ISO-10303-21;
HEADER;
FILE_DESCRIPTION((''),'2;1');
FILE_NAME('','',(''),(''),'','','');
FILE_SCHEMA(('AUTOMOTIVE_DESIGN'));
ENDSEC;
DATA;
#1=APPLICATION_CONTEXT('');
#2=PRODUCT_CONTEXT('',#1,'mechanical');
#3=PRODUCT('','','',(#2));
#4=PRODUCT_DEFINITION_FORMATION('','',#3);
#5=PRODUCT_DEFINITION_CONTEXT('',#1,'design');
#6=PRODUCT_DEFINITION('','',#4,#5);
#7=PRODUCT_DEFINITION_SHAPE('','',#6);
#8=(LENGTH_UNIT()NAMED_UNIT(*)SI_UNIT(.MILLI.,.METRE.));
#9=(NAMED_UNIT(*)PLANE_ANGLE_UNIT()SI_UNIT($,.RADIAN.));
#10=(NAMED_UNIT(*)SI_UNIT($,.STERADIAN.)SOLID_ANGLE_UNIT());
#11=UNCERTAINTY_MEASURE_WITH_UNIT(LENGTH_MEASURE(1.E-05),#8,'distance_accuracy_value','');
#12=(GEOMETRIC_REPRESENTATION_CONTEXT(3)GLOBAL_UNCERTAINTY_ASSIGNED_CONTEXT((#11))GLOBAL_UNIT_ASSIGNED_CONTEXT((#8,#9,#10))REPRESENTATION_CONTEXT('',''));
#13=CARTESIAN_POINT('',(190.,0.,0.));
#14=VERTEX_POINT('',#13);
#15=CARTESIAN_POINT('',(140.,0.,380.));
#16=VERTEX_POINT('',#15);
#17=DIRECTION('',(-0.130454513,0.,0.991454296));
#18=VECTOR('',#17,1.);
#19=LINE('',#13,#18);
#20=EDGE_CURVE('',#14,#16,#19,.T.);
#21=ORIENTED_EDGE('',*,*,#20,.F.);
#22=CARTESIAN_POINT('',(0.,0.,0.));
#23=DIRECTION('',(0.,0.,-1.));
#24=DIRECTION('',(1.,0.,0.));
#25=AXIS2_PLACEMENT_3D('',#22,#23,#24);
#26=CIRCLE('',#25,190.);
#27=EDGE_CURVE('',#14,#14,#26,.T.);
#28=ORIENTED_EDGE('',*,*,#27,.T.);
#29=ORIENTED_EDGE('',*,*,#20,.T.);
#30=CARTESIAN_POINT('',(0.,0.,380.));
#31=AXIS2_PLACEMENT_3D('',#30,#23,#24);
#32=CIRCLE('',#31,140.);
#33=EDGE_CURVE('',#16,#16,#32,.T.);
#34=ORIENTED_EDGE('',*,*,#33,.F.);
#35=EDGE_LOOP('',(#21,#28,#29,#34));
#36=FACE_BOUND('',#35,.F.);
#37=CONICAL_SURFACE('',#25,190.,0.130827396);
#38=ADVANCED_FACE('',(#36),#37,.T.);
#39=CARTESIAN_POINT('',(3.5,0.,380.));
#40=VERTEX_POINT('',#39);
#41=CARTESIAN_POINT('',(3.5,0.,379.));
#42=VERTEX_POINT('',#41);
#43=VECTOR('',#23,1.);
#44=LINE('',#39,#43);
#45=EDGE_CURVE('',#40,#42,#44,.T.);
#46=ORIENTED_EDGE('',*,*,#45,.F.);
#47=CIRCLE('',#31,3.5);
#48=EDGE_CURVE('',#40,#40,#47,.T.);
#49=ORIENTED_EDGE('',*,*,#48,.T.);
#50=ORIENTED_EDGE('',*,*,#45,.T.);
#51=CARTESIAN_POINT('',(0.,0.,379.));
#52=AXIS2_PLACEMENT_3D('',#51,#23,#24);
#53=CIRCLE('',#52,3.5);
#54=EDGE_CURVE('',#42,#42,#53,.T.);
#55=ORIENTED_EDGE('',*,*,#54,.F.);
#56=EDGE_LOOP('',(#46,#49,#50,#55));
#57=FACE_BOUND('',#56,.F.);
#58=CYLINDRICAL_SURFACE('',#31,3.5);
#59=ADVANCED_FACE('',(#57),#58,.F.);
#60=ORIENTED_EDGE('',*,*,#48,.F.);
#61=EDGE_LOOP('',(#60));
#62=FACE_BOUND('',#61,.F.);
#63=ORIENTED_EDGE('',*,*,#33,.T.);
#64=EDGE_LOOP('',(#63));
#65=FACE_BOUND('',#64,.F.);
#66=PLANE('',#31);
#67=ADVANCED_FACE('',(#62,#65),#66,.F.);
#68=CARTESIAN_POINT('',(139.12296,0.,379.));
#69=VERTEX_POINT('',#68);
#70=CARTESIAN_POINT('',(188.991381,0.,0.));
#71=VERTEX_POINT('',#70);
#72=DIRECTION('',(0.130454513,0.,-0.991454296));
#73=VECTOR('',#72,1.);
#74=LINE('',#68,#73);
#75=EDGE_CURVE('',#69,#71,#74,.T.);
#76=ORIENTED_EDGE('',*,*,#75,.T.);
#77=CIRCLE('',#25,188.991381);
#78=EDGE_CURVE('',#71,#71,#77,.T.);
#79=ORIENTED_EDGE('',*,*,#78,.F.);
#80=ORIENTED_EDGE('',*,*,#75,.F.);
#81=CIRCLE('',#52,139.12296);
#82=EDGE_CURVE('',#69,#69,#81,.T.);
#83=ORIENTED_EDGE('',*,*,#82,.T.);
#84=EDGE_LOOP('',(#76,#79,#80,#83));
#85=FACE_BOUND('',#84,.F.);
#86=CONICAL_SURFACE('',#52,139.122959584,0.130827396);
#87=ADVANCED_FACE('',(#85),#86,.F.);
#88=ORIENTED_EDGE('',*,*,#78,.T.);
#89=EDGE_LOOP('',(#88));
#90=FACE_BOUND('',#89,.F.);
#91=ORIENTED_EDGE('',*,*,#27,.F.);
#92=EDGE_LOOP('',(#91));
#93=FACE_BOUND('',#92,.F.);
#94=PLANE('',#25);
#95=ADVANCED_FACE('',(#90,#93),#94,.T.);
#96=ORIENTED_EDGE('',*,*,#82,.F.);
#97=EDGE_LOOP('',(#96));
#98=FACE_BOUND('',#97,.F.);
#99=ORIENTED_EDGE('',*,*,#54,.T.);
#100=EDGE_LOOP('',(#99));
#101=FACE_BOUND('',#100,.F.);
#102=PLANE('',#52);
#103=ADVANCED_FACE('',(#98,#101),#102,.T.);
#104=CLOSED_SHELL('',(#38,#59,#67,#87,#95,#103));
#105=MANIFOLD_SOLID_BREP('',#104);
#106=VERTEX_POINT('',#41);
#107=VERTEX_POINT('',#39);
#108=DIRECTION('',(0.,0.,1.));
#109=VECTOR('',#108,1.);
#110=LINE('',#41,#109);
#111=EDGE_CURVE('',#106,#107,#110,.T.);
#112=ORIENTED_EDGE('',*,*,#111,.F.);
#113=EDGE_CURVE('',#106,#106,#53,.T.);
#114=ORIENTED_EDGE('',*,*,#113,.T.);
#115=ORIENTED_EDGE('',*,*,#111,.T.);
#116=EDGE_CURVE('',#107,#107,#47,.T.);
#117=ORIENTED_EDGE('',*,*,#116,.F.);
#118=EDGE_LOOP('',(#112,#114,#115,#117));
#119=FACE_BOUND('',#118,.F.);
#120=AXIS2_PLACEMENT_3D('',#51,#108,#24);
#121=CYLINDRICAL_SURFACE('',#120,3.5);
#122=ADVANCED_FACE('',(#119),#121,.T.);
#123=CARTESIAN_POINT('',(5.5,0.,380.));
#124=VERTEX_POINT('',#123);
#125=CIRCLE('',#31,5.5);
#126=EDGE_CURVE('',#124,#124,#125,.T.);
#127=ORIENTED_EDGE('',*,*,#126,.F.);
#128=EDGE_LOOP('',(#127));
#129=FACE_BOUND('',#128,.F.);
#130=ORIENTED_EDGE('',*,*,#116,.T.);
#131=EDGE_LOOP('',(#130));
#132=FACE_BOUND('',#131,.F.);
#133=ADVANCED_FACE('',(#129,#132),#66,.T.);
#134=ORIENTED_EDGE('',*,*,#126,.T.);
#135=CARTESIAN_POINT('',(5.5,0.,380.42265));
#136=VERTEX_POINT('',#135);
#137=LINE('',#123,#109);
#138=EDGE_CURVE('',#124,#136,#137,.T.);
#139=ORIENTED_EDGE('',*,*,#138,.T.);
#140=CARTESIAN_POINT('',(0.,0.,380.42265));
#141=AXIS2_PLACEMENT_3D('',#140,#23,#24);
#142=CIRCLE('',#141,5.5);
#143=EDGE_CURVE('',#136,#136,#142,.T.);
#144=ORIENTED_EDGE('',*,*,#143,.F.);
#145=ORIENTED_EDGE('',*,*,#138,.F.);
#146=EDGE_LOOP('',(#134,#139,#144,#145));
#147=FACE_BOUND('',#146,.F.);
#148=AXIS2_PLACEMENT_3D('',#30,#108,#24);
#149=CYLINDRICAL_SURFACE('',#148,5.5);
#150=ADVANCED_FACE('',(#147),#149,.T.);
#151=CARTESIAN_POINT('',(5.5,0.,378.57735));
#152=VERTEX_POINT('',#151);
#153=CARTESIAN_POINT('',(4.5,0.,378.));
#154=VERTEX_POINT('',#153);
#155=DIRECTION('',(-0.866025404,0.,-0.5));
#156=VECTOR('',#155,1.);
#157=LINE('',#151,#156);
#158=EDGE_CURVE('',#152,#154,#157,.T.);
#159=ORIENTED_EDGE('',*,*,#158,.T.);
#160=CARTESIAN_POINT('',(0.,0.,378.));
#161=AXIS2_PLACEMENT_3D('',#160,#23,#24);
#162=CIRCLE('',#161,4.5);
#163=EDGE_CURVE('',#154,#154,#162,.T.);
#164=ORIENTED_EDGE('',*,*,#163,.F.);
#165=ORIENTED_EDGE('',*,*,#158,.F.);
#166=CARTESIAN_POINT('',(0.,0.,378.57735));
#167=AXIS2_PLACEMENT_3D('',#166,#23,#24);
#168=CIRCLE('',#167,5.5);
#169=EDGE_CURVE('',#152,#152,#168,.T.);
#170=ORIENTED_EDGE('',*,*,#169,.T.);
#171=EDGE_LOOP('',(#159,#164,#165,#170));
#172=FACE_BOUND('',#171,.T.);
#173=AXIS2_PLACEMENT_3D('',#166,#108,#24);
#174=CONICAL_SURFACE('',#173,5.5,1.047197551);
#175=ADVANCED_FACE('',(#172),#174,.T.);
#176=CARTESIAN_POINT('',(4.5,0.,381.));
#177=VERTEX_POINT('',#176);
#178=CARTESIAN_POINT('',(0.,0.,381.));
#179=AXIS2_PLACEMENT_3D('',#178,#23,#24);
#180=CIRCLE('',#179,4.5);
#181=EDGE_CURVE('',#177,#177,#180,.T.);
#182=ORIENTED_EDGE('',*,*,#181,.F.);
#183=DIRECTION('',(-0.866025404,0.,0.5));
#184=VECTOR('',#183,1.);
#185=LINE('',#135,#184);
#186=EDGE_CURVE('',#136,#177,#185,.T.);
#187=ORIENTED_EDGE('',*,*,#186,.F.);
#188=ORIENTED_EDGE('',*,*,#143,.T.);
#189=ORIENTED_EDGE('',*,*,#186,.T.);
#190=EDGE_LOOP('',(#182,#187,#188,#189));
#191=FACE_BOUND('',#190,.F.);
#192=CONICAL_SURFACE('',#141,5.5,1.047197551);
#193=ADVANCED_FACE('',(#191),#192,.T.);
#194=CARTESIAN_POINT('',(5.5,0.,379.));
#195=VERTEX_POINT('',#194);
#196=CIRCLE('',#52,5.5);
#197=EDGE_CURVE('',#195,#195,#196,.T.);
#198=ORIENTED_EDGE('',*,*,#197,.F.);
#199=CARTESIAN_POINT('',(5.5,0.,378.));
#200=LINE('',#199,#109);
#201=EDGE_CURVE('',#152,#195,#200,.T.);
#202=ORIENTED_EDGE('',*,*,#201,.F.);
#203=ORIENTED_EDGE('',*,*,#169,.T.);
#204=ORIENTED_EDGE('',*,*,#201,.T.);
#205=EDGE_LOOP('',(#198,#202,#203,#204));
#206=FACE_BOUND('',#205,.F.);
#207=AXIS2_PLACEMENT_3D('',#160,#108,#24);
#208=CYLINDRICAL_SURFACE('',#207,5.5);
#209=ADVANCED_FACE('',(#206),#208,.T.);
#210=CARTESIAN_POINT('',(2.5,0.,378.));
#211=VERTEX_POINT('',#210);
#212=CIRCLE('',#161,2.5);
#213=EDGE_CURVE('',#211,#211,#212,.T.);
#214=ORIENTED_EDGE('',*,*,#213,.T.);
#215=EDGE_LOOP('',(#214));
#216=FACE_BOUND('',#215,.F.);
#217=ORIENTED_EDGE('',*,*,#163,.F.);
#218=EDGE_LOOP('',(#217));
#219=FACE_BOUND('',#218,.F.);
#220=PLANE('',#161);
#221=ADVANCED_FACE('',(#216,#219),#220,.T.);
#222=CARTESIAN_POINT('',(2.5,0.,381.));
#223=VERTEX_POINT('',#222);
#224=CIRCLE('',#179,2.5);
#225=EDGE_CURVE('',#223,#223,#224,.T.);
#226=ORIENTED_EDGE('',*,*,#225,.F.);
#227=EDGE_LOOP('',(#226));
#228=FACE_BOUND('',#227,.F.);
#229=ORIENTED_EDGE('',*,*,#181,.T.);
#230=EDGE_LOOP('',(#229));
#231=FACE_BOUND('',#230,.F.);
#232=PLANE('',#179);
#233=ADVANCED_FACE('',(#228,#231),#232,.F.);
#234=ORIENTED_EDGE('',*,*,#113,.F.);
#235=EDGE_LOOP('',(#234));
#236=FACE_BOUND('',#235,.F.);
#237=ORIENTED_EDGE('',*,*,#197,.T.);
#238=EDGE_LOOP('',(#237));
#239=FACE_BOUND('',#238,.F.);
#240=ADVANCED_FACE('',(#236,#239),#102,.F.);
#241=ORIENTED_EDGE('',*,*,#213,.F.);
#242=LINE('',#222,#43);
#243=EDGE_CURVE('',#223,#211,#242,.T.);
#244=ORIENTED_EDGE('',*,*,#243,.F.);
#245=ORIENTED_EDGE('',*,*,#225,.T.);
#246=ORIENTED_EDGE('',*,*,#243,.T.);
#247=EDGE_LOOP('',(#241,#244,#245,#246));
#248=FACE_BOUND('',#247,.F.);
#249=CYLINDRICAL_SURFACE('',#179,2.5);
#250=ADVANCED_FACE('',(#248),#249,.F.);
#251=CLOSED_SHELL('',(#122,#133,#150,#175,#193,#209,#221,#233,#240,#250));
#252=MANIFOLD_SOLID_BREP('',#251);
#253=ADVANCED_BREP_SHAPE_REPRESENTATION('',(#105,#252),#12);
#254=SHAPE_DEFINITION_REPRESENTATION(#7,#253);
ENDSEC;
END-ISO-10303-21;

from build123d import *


# Not quite as in the source:
# - a fillet or chamfer that OpenCascade refuses, or shapes differently, is made with other operations: its cross-section is extruded or revolved along the edge and cut away or added


with BuildPart() as f1:
    # F0 (on Front) → F1 (revolve)
    with BuildSketch(Plane.XZ):
        Polygon((5.5, 380), (3.5, 380), (3.5, 379), (5.5, 379), (139.1229595844, 379), (188.991380637, 0), (190, 0), (140, 380), align=None)
    revolve(axis=Axis((0, 0, -10.9773641452), (0, 0, -1)))


with BuildPart() as f2:
    # F0 (on Front) → F2 (revolve)
    with BuildSketch(Plane.XZ):
        Polygon((3.5, 379), (3.5, 380), (5.5, 380), (5.5, 381), (2.5, 381), (2.5, 378), (5.5, 378), (5.5, 379), align=None)
    revolve(axis=Axis((0, 0, -10.9773641452), (0, 0, -1)))

    # F3: chamfer of 1 x 0.5773502692 on 1 edges, made by hand

    # F3_s1 → F3_t2 (revolve, cut)
    with BuildSketch(Plane.XZ):
        Polygon((5.5, 380.4226497308), (4.5, 381), (5.5, 381), align=None)
    revolve(axis=Axis((0, 0, 381), (0, 0, -1)), mode=Mode.SUBTRACT)

    # F4: chamfer of 1 x 0.5773502692 on 1 edges, made by hand

    # F4_s1 → F4_t2 (revolve, cut)
    with BuildSketch(Plane.XZ):
        Polygon((5.5, 378.5773502692), (4.5, 378), (5.5, 378), align=None)
    revolve(axis=Axis((0, 0, 378), (0, 0, -1)), mode=Mode.SUBTRACT)


solid = Compound([f1.part, f2.part])
